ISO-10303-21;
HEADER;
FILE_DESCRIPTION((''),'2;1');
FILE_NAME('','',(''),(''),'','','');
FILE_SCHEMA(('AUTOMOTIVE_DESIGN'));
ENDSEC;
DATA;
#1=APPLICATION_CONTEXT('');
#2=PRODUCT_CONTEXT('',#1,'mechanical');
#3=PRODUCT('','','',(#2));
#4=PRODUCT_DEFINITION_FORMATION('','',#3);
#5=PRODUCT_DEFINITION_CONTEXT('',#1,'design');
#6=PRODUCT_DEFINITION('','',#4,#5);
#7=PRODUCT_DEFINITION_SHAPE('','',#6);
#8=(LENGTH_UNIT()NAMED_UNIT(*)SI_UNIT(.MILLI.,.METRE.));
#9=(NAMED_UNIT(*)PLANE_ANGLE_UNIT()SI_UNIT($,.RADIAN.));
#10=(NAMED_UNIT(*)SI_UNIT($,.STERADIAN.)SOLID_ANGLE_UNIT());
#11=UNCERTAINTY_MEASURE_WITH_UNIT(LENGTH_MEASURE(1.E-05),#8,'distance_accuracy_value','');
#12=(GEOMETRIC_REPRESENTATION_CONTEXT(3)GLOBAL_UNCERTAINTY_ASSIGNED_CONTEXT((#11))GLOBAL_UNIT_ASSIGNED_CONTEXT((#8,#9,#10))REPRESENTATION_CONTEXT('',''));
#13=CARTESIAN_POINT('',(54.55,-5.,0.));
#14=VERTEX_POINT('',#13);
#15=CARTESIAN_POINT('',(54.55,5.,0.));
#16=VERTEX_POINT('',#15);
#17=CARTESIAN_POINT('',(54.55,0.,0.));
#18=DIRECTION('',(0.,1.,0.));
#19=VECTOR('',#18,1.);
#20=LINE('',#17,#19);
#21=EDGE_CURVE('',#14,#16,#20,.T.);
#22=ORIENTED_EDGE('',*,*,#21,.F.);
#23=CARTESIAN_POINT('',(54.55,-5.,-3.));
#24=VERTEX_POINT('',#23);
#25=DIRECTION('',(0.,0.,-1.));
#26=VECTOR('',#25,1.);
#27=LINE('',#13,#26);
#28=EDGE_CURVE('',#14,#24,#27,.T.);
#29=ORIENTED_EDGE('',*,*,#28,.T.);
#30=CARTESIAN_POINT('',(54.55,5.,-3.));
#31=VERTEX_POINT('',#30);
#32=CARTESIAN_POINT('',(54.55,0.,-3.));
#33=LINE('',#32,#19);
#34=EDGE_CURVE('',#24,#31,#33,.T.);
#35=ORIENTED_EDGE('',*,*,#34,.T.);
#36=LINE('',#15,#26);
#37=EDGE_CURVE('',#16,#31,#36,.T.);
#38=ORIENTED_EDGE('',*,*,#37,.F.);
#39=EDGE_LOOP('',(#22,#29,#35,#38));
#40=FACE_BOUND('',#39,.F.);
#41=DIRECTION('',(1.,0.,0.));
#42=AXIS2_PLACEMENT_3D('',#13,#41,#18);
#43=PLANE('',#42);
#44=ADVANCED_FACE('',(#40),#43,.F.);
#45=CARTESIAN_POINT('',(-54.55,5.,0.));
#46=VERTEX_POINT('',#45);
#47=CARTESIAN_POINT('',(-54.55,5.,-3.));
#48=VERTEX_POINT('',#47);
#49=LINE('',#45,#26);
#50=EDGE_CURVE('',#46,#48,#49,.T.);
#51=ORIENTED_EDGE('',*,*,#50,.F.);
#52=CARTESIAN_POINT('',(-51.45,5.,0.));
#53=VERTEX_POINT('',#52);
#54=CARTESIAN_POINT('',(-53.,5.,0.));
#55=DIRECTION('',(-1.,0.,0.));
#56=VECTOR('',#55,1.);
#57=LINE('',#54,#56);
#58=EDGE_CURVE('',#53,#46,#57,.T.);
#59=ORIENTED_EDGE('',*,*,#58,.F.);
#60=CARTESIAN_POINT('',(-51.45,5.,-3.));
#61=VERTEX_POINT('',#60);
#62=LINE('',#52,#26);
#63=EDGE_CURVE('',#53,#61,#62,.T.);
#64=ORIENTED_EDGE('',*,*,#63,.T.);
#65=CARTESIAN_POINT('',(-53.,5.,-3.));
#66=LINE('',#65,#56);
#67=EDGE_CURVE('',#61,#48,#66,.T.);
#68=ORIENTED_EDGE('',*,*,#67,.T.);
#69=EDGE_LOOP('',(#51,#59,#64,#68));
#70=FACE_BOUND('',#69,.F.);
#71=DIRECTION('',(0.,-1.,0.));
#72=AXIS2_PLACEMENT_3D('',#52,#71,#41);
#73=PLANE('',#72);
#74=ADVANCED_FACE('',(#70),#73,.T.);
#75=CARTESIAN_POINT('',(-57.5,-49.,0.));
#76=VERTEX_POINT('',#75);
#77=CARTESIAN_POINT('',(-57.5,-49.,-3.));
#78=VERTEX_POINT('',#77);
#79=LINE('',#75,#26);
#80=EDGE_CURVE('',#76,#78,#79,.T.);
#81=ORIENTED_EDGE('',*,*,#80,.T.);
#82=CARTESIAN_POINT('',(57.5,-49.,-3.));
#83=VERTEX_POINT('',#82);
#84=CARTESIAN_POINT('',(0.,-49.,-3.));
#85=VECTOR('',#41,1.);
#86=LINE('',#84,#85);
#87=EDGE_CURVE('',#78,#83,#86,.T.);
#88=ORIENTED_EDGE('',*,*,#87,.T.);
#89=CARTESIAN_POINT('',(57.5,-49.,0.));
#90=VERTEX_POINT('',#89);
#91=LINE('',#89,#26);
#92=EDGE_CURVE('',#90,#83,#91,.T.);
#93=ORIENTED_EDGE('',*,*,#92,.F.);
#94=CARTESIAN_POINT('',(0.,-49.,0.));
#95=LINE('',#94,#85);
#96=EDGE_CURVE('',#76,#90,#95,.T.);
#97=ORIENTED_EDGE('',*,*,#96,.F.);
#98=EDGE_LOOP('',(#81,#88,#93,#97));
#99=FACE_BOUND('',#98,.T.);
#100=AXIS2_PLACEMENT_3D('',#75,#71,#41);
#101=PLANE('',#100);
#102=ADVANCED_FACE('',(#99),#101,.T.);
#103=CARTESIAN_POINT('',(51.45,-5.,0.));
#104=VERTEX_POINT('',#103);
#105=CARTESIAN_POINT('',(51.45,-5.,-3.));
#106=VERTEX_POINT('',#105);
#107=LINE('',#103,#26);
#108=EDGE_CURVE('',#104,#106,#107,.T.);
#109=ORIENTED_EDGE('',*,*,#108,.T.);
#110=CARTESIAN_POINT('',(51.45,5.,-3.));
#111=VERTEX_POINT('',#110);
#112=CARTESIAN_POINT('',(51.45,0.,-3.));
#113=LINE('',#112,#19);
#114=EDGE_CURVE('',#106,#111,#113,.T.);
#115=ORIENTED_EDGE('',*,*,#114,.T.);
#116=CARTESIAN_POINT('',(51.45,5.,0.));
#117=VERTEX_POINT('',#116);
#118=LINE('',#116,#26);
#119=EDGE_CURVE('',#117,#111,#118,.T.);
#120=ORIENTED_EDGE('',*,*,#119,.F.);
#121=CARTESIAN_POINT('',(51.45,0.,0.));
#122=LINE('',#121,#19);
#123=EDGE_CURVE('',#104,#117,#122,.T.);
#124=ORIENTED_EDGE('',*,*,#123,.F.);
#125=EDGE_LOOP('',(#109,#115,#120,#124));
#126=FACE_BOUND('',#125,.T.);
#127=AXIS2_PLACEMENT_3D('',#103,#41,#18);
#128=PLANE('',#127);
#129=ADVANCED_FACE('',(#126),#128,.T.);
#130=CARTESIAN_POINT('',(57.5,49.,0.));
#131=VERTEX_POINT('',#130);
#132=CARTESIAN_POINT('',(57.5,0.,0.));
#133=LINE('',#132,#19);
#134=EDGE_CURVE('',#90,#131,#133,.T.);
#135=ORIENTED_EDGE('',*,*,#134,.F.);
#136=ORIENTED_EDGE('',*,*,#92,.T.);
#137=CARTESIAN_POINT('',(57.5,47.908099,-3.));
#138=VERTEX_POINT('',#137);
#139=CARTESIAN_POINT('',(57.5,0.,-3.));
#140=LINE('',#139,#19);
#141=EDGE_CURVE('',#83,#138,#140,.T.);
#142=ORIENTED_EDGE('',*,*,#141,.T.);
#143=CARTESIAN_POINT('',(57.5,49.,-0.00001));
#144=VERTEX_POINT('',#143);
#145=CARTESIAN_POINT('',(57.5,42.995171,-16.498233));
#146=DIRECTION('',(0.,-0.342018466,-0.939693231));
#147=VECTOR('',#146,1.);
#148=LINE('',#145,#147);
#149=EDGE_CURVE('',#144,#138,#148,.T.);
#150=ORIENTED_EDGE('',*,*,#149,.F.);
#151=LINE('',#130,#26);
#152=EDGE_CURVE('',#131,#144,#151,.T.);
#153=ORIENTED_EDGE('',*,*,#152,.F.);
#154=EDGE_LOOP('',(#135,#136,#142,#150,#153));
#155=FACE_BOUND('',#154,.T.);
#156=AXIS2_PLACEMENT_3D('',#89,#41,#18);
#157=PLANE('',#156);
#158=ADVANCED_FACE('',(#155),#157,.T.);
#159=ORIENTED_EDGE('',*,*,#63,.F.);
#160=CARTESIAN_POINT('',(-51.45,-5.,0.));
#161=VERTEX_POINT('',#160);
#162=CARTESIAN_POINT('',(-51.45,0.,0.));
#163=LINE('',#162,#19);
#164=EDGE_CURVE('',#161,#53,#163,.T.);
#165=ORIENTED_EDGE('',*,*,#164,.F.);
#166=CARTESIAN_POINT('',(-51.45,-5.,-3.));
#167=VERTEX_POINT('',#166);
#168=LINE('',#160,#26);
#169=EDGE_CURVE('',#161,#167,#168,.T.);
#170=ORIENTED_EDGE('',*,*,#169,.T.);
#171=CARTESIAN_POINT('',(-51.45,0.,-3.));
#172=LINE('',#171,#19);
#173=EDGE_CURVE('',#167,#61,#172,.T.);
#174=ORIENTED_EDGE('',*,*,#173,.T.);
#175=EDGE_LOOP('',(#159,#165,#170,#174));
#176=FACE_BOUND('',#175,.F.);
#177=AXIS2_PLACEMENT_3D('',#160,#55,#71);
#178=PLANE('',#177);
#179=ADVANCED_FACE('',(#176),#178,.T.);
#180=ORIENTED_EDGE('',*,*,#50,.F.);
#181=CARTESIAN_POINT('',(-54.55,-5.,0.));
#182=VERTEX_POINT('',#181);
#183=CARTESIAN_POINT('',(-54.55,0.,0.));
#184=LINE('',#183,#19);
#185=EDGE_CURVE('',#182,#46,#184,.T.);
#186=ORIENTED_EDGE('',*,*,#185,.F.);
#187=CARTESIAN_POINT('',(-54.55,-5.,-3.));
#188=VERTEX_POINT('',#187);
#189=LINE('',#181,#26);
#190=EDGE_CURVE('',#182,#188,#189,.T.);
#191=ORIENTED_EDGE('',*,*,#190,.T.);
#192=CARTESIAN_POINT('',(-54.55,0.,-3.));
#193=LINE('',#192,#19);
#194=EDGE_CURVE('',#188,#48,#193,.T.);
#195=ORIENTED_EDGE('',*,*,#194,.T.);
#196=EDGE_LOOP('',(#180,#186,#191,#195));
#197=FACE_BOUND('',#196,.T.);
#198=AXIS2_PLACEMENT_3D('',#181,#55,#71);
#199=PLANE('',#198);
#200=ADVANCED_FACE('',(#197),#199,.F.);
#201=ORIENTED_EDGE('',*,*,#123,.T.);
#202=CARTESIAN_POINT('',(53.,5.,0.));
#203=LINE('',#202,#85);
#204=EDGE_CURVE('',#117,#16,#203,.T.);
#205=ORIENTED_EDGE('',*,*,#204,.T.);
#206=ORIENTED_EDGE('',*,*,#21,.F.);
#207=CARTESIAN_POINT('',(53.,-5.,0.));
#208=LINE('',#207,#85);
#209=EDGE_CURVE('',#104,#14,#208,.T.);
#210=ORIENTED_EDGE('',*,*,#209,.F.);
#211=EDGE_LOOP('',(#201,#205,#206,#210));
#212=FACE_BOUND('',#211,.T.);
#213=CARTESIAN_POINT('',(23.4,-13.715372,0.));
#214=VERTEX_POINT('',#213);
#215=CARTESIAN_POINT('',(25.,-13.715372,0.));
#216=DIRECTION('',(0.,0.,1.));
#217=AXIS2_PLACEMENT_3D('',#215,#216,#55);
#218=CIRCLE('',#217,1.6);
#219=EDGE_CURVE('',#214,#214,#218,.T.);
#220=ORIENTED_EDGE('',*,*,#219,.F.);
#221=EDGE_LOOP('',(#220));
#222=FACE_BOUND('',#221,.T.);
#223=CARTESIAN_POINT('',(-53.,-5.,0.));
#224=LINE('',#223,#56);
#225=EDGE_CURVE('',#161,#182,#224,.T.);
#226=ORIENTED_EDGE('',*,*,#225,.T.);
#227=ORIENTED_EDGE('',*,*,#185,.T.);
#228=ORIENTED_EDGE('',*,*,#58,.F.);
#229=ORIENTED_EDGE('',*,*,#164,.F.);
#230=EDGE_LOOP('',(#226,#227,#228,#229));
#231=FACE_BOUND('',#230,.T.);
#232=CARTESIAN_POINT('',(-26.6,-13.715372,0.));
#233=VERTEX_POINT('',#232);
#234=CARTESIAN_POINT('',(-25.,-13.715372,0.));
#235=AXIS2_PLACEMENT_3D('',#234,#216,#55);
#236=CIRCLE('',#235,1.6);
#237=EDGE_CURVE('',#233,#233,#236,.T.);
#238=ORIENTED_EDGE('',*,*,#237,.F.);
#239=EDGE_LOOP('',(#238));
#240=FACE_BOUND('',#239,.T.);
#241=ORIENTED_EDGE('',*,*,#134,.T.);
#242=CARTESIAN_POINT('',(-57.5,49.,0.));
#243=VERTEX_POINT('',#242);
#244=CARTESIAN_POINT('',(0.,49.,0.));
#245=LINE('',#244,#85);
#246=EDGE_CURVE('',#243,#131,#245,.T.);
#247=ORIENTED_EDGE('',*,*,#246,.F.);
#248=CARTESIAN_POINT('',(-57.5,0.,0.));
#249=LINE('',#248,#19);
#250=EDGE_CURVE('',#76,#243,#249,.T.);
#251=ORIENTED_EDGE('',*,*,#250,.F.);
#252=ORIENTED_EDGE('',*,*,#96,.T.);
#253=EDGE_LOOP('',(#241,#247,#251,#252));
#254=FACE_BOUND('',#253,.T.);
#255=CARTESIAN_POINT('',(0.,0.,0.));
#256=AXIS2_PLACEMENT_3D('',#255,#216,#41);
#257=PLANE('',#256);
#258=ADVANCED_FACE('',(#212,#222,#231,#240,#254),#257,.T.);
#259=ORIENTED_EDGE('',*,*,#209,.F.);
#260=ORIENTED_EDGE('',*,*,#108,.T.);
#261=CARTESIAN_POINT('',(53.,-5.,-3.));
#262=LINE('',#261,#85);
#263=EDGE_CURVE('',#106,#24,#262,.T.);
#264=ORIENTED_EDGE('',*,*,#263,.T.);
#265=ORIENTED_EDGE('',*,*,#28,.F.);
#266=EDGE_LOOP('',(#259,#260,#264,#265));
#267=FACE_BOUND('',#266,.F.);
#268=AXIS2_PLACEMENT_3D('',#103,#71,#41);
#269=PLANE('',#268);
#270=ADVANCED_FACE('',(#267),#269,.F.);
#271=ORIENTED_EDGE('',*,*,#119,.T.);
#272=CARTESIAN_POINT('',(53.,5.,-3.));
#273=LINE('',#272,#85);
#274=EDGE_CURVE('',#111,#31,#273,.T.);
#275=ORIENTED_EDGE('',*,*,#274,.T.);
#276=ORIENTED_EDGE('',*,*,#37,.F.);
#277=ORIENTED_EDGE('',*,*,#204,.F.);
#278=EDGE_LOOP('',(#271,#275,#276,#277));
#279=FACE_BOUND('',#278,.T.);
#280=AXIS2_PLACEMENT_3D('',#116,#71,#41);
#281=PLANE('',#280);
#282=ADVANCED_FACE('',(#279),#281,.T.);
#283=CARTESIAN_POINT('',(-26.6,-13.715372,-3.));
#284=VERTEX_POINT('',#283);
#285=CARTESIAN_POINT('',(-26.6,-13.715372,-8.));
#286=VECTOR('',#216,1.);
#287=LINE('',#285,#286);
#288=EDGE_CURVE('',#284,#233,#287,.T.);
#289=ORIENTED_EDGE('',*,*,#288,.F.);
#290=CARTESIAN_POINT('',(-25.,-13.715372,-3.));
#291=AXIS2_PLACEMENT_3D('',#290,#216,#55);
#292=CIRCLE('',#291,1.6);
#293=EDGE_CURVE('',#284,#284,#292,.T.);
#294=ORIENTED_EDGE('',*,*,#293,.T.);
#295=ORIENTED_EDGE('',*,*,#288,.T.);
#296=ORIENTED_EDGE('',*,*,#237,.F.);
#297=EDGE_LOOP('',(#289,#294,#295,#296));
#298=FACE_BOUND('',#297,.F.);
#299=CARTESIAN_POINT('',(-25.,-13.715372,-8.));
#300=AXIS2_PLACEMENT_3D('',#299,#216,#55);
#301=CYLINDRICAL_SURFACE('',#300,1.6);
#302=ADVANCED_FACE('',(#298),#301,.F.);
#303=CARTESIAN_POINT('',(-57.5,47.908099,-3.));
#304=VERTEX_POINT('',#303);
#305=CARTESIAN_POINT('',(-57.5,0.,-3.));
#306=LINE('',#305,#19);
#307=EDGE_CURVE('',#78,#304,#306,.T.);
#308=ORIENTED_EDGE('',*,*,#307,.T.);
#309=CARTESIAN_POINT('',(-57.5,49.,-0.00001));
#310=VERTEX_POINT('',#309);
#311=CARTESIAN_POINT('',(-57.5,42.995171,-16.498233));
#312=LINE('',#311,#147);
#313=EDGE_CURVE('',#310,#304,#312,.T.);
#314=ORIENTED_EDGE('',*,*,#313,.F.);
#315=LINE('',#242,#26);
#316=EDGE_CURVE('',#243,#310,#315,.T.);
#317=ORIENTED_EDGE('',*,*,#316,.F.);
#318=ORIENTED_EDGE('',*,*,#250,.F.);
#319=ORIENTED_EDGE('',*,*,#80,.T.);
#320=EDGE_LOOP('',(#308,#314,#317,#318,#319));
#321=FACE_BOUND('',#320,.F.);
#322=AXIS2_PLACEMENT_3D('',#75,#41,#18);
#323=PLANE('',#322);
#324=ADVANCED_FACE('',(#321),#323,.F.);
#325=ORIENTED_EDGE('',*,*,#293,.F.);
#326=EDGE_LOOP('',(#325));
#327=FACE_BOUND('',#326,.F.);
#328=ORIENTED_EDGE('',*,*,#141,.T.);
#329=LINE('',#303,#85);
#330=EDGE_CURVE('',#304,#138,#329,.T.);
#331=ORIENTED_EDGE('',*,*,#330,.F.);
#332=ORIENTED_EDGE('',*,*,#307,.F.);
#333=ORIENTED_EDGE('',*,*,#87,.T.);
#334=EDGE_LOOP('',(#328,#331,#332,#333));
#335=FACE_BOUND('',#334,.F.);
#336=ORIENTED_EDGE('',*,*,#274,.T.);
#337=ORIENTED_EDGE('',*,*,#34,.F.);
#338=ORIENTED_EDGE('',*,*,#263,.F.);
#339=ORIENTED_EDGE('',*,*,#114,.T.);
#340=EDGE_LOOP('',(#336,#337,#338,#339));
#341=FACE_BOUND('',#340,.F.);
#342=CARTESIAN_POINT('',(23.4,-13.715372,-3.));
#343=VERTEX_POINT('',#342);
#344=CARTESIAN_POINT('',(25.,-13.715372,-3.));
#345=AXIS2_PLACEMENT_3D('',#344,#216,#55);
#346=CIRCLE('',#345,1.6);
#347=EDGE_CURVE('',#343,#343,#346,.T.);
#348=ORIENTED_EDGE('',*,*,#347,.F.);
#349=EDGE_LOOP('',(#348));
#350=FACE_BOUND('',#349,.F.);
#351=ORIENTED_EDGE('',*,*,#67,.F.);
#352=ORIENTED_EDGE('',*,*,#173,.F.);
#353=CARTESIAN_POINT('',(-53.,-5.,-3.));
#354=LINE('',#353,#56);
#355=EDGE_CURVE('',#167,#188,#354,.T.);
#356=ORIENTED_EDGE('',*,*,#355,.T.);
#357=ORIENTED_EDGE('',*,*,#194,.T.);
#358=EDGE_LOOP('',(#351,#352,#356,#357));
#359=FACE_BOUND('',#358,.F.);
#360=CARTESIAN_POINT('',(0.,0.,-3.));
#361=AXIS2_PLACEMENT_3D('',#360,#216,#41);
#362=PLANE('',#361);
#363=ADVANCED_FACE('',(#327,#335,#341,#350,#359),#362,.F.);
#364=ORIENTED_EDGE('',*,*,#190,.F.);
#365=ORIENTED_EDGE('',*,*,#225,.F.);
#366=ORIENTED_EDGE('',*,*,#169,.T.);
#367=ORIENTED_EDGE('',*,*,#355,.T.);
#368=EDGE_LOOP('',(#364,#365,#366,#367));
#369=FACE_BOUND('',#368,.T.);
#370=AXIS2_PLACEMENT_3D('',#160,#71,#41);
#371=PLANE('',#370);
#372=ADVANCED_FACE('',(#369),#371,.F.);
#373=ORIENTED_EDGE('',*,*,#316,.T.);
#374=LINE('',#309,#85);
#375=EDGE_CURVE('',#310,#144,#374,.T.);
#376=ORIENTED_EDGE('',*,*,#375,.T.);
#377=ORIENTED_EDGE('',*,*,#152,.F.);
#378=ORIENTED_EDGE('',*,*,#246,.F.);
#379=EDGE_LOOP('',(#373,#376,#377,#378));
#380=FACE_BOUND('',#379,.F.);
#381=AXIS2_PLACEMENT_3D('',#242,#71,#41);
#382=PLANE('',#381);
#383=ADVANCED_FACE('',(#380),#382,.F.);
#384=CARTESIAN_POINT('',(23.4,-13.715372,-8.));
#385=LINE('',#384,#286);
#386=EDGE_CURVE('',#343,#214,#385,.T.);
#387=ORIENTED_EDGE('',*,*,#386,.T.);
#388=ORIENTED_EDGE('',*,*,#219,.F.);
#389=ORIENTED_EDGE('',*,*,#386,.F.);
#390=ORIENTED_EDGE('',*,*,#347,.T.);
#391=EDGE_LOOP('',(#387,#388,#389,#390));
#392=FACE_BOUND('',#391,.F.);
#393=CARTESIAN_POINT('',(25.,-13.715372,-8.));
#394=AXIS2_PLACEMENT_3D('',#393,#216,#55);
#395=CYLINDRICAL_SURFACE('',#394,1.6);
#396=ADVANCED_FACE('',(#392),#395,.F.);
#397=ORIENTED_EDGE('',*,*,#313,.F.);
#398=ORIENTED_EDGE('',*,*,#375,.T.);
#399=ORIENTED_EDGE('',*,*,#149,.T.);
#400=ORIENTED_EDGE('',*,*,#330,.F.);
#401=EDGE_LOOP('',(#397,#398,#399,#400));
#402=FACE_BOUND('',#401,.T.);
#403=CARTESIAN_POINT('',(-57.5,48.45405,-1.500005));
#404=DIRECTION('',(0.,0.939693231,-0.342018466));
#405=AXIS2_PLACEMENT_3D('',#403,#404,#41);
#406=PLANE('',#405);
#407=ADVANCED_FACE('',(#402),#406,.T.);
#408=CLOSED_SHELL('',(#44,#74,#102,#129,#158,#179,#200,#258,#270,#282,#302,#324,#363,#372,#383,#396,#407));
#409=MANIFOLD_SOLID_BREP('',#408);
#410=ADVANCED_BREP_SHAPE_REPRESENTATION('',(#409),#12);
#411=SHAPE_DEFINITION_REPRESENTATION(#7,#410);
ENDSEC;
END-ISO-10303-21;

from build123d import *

# Parameters (mm, degrees)
F0_W     = 115
F0_H     = 98
F1_DEPTH = 3
F2_W     = 3.1
F2_H     = 10
F3_DEPTH = 3
F4_SIZE2 = 1.091901
F4_SIZE  = 2.99999
F8_D     = 3.2
F8_DEPTH = 5
F8_TIP   = 0.9613769904


# Not quite as in the source:
# - a fillet or chamfer is up to 0.001 mm smaller than in the source, because OpenCascade refuses the exact size
# - a pattern or mirror of a feature is missing from the dataset's text; its kind, count and spacing are read off the source's solid


with BuildPart() as f1:
    # F0 (on Top) → F1 (new body)
    with BuildSketch(Plane.XY):
        Rectangle(F0_W, F0_H)
    extrude(amount=-F1_DEPTH)

    # F2 (on face) → F3 (cut, through all)
    with BuildSketch(Plane.XY):
        with Locations((53, 0)):
            Rectangle(F2_W, F2_H)
    f3 = extrude(amount=-F3_DEPTH, mode=Mode.SUBTRACT)

    # F3_copies: F3 across plane
    add(f3.mirror(Plane(origin=(0, 0, 0), x_dir=(0, 0, -1), z_dir=(-1, 0, 0))), mode=Mode.SUBTRACT)

    # F4 (size 3 and 1.0919107028 in the source; OpenCascade refuses exactly that, so slightly less here)
    f4_edges = [f1.edges().sort_by_distance(p)[0] for p in [
        (0, 49, -3),
    ]]
    f4_side = f1.faces().sort_by_distance((0, 49, -1.5))[0]
    chamfer(f4_edges, length=F4_SIZE, length2=F4_SIZE2, reference=f4_side)

    # F8
    with Locations(Plane(origin=(0, 0, -3), x_dir=(1, 0, 0), z_dir=(0, 0, -1))):
        with Locations((25, 13.7153716188), (-25, 13.7153716188)):
            Hole(F8_D / 2, depth=F8_DEPTH)
            with Locations((0, 0, -(F8_DEPTH + F8_TIP / 2))):  # 118° drill point
                Cone(0, F8_D / 2, F8_TIP, mode=Mode.SUBTRACT)


solid = f1.part
